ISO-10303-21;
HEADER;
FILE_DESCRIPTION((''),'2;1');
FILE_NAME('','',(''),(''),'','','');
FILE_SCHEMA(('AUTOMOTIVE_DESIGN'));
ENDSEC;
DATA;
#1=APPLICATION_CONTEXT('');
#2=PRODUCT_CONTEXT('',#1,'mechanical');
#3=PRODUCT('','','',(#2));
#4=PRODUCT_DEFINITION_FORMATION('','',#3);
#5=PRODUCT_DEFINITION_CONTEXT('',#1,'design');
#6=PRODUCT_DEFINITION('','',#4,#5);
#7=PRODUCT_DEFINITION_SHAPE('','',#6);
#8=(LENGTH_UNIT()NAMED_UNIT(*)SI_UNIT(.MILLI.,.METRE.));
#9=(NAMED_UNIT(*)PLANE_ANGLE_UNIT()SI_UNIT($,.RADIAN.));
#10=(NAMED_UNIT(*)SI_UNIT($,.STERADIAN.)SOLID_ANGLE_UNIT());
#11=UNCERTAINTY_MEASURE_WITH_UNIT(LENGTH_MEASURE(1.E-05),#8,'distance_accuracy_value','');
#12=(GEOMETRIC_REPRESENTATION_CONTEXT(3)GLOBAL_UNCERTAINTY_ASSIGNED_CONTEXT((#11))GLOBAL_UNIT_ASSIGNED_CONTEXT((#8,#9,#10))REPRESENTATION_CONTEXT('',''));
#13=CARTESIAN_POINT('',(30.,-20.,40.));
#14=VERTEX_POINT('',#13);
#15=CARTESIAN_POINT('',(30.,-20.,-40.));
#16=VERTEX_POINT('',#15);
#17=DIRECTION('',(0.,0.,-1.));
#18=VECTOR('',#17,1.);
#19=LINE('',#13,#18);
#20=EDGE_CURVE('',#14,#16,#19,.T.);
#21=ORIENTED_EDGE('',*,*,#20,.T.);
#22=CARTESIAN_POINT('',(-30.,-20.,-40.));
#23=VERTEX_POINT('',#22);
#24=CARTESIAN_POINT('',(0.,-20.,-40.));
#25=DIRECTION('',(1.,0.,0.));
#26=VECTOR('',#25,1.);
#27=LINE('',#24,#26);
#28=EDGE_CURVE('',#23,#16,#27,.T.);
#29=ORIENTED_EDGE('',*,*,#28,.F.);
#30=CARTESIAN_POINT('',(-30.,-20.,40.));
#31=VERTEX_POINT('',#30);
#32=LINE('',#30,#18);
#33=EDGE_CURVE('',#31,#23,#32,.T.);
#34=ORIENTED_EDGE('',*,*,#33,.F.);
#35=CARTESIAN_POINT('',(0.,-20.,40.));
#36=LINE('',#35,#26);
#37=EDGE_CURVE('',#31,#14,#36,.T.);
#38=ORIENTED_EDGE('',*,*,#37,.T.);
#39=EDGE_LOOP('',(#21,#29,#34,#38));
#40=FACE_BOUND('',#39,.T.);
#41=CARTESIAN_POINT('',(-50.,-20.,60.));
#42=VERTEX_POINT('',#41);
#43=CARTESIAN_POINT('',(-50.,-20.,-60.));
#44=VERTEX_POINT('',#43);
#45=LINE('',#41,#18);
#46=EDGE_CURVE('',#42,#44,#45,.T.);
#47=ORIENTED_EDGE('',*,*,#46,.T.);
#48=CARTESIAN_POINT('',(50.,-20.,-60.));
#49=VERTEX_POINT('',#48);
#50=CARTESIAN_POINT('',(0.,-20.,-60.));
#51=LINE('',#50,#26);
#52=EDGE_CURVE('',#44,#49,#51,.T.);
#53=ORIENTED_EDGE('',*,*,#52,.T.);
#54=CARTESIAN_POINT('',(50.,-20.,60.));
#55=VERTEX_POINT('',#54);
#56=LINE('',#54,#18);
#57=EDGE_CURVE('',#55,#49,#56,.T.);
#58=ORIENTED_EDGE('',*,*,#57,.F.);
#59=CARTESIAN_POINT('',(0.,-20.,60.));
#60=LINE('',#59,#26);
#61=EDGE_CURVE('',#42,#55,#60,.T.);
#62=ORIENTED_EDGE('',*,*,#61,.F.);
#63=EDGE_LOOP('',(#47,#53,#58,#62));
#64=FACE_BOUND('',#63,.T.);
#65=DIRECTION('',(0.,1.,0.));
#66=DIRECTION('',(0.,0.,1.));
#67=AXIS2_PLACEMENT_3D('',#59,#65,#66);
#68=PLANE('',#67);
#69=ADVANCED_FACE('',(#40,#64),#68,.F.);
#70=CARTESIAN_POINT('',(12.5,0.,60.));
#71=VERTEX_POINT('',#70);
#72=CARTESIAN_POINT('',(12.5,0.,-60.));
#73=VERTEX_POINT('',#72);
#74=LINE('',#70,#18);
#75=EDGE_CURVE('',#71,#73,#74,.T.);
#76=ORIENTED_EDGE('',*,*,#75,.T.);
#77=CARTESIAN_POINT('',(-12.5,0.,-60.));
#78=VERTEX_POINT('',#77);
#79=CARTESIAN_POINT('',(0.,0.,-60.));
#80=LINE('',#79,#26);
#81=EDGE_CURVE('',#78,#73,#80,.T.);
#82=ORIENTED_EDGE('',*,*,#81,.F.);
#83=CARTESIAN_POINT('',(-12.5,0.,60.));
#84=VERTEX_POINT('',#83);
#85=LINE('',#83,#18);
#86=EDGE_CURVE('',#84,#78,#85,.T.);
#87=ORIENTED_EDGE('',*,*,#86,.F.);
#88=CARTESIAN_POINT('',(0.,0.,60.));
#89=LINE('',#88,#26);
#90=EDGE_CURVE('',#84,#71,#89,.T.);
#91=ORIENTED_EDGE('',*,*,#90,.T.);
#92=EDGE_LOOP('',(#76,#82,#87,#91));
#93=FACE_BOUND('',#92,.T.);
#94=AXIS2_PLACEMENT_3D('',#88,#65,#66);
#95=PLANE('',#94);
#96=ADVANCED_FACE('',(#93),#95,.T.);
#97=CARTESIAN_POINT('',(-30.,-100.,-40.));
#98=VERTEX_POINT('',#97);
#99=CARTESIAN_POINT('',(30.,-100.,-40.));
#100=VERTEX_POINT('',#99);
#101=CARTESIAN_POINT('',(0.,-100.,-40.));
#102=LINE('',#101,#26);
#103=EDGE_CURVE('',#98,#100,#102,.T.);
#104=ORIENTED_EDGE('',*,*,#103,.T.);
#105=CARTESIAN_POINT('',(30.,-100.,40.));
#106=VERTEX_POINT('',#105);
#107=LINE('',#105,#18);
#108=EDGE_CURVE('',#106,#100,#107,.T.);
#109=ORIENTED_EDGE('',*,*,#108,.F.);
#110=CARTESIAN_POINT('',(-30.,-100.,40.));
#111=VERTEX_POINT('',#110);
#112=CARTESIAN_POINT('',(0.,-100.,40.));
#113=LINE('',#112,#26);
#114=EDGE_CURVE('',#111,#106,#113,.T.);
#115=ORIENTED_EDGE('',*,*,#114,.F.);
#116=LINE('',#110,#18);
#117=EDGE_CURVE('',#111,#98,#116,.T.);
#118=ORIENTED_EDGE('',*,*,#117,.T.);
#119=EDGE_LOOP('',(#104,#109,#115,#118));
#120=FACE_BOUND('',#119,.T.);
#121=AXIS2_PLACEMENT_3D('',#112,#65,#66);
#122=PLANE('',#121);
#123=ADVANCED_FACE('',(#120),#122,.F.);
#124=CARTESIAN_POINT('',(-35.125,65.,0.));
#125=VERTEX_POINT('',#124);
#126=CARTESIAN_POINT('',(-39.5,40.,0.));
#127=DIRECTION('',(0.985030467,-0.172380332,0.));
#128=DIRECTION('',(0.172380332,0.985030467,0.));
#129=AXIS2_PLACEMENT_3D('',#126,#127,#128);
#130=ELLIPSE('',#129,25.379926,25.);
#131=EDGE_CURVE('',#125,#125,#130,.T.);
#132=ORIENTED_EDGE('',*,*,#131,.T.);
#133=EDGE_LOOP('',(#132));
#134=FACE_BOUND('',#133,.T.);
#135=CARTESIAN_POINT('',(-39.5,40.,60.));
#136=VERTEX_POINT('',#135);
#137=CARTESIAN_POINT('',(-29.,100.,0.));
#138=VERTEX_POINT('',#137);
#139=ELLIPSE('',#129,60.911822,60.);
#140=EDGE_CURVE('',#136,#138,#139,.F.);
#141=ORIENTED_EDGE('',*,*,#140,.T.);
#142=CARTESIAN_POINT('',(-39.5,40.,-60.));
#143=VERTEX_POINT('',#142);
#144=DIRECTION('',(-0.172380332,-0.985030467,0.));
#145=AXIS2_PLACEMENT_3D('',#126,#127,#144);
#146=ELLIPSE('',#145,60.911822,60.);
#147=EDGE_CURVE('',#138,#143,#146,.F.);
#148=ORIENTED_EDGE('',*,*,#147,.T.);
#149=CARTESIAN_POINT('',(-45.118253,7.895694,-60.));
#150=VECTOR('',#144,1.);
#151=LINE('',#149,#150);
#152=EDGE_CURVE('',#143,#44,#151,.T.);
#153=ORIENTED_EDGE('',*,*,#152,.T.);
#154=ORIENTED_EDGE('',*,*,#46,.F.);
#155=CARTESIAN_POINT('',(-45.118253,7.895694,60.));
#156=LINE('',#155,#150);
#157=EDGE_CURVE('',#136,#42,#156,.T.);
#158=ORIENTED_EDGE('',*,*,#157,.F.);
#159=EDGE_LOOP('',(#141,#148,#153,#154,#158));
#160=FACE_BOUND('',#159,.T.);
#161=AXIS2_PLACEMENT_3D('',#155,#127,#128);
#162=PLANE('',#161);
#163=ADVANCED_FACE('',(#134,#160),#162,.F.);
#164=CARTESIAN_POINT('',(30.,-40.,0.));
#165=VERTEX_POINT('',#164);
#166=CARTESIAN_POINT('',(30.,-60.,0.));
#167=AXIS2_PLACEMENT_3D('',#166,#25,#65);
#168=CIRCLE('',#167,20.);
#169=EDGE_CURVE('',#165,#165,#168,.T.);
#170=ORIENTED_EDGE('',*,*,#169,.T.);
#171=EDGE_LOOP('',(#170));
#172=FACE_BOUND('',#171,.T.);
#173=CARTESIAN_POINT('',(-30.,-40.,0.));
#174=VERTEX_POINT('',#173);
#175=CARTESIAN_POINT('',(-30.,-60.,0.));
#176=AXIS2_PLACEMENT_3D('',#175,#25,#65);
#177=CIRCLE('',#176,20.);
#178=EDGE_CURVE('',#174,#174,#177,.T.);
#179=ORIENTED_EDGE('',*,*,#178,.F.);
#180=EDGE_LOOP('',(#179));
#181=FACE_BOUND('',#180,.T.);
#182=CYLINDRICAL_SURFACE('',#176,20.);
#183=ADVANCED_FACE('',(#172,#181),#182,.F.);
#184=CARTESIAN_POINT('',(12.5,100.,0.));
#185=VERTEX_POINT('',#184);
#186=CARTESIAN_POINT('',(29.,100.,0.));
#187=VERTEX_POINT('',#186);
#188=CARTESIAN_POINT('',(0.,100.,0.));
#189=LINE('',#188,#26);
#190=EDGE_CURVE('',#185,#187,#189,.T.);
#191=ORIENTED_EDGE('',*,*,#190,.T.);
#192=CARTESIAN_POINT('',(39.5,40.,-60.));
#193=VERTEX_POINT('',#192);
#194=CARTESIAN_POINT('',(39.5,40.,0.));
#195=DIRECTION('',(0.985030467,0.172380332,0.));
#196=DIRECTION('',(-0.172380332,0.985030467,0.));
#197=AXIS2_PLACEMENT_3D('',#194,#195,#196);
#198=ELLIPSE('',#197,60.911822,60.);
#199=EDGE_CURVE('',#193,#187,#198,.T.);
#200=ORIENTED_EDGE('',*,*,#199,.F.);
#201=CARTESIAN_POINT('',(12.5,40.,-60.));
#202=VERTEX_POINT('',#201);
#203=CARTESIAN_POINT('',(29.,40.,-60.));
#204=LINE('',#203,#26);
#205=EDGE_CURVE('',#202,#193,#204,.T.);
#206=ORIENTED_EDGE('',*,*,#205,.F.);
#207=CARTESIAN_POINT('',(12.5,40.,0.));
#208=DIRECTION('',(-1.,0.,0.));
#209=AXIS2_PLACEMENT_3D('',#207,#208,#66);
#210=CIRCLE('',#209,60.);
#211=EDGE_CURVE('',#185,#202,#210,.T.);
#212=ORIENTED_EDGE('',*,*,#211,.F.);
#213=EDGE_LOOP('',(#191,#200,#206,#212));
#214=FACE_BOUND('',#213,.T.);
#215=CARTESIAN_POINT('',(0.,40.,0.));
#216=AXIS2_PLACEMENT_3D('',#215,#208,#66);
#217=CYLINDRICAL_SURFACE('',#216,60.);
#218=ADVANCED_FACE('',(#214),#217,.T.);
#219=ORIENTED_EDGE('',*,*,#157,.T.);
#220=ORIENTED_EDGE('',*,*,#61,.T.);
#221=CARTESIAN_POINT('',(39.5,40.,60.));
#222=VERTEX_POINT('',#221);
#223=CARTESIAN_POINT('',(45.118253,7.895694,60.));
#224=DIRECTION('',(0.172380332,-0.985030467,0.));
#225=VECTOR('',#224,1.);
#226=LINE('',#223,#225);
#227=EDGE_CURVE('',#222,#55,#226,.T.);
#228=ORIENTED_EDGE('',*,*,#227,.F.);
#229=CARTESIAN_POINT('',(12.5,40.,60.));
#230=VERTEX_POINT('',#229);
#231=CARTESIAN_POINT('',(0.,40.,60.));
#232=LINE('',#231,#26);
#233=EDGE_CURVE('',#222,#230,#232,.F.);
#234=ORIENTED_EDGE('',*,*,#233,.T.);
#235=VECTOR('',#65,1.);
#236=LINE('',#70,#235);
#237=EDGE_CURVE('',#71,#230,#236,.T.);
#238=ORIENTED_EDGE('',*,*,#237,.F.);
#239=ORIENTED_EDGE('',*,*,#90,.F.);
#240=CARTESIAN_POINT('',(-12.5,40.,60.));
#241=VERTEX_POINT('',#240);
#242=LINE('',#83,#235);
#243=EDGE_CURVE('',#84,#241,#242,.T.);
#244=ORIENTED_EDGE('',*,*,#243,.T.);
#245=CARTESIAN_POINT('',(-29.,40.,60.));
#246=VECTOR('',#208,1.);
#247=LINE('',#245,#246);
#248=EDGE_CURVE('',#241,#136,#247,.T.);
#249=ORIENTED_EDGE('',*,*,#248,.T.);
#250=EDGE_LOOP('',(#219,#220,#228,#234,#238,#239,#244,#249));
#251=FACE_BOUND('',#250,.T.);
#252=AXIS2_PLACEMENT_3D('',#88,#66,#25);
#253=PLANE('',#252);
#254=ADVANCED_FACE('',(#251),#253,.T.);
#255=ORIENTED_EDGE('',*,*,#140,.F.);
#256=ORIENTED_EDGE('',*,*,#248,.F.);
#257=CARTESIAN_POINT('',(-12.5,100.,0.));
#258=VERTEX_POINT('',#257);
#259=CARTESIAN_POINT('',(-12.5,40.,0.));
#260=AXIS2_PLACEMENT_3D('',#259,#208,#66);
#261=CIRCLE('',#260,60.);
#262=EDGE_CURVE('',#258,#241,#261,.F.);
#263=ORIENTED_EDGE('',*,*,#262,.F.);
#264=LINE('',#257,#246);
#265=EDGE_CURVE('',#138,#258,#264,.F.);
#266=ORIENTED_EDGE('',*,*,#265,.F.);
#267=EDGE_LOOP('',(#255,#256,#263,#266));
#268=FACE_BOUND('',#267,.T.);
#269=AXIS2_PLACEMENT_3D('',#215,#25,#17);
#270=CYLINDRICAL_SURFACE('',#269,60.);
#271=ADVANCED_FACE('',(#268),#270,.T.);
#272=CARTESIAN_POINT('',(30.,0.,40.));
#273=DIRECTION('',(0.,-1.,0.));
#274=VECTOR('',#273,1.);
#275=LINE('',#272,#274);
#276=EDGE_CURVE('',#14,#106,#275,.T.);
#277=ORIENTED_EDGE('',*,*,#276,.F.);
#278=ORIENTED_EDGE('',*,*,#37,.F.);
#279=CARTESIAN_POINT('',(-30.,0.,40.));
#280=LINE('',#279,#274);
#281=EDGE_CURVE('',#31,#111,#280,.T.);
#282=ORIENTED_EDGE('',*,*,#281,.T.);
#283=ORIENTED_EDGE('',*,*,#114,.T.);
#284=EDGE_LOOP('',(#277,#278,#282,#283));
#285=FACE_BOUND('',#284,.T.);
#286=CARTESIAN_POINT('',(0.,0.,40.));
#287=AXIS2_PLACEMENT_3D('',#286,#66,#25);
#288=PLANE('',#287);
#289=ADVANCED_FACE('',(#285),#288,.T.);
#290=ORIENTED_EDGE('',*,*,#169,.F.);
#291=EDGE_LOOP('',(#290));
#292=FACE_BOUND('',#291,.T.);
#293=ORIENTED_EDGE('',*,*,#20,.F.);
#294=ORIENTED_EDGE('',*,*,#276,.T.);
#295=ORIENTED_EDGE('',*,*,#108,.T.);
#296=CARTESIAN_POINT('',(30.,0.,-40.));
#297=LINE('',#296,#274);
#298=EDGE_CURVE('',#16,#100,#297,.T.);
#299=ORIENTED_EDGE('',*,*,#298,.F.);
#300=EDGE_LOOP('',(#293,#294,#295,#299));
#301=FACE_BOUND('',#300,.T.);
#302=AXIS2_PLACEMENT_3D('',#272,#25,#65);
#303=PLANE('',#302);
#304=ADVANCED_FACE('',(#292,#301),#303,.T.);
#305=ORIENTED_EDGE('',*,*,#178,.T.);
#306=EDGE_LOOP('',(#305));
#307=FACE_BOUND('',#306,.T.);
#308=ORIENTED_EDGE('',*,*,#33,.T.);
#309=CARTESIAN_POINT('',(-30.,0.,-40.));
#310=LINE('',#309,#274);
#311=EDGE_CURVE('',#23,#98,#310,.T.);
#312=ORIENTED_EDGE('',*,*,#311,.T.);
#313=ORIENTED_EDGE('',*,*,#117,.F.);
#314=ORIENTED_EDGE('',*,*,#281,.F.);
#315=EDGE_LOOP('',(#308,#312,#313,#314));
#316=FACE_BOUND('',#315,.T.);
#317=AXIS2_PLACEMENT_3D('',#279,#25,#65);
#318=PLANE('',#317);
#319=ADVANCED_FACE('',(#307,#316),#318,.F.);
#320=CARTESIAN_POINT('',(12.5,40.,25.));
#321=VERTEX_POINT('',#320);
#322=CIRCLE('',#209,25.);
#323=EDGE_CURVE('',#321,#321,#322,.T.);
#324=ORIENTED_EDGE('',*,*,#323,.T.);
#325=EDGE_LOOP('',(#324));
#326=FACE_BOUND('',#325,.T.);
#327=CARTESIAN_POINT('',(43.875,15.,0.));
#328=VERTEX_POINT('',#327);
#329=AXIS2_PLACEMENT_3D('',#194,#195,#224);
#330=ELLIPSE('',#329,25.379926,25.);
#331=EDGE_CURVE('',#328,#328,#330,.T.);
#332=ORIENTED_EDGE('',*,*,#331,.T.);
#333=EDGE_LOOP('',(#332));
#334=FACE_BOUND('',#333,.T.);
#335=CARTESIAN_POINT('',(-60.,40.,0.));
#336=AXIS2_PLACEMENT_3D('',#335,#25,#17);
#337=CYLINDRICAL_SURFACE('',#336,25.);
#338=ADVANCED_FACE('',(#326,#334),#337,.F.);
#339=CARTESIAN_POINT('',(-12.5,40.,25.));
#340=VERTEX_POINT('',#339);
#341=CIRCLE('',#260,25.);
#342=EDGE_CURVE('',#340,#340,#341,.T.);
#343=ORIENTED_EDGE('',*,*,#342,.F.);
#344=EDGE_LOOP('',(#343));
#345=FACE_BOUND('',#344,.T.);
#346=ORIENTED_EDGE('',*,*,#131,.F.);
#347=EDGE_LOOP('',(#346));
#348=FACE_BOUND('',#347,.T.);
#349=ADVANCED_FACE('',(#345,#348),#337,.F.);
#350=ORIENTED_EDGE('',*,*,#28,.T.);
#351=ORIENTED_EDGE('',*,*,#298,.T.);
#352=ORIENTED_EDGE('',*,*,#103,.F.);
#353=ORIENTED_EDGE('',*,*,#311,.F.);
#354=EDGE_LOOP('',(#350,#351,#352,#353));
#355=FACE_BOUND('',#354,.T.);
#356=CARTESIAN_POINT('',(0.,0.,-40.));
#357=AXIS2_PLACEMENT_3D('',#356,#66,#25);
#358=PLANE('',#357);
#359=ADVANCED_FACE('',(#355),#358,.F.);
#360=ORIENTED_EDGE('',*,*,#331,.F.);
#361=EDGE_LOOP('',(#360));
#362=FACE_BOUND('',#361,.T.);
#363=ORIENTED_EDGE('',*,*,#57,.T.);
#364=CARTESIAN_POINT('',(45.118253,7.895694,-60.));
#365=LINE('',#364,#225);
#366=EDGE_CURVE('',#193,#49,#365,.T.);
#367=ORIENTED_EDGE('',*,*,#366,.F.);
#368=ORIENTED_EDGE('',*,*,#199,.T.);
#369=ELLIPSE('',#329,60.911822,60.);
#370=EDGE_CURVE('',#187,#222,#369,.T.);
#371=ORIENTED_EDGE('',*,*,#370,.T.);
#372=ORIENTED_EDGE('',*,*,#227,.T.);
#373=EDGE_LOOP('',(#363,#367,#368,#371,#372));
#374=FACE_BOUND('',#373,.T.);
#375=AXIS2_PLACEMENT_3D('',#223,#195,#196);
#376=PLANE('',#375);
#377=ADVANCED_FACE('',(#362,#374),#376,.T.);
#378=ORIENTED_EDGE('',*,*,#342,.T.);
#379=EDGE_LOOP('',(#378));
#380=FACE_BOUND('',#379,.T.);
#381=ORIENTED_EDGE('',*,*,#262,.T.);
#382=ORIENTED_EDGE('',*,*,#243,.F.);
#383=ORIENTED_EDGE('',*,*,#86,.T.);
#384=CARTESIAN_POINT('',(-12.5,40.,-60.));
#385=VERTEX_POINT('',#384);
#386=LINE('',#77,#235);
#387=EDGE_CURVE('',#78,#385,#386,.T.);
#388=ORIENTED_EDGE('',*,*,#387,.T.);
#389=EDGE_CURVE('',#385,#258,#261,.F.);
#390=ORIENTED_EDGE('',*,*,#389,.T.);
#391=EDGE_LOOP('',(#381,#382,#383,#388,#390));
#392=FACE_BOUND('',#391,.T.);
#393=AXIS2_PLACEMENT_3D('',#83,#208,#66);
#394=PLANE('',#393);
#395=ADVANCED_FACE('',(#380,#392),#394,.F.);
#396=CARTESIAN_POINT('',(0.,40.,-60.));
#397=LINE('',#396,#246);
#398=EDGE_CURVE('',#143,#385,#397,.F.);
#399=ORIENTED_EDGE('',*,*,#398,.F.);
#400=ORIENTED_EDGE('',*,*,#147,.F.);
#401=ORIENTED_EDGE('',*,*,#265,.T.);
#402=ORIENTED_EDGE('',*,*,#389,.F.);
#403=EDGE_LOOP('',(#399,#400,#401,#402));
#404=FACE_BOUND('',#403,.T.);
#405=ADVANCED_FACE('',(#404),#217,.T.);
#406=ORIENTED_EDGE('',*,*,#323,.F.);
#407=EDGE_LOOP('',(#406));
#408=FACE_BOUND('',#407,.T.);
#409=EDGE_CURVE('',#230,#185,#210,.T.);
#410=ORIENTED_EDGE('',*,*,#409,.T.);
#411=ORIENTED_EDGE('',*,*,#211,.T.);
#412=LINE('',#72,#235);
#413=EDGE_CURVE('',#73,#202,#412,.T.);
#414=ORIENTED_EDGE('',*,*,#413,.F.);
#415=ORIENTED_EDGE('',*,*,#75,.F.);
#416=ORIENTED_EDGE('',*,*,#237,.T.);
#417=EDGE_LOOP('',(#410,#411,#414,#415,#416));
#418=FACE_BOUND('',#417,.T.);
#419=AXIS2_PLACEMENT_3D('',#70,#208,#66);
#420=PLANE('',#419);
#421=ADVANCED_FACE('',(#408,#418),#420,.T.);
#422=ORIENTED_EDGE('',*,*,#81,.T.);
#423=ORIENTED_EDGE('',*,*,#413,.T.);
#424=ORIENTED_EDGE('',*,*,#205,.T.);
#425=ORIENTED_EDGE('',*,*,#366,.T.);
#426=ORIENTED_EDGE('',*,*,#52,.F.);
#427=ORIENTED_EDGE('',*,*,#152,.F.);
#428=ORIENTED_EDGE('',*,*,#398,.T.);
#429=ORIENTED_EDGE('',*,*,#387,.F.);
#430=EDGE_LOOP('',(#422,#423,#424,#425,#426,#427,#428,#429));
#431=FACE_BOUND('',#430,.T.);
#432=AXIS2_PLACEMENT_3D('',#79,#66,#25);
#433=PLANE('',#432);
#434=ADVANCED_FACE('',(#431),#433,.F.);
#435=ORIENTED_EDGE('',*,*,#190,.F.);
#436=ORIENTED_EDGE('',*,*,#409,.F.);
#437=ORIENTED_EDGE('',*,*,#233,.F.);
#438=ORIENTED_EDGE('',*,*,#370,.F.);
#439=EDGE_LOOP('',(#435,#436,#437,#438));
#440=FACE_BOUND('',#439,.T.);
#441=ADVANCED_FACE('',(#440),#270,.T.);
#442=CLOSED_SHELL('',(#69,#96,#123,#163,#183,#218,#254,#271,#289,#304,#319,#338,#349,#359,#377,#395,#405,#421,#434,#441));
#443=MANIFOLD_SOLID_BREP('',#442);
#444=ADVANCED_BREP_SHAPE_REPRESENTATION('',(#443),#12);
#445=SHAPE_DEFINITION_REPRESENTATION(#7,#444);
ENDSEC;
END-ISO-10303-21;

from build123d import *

# Parameters (mm, degrees)
SKETCH1_W           = 80
SKETCH1_H           = 60
BOSS_EXTRUDE1_DEPTH = 40
BOSS_EXTRUDE2_DEPTH = 60
SKETCH2_R           = 25
CUT_EXTRUDE2_DEPTH  = 60
FILLET1_R           = 60
SKETCH3_R           = 20
CUT_EXTRUDE3_DEPTH  = 60


with BuildPart() as part:
    # Sketch1 → Boss-Extrude1 (new, symmetric)
    with BuildSketch(Plane(origin=(0, 0, 0), x_dir=(0, 1, 0), z_dir=(0, 0, 1))):
        with Locations((-60, 0)):
            Rectangle(SKETCH1_W, SKETCH1_H)
    extrude(amount=BOSS_EXTRUDE1_DEPTH, both=True)

    # Sketch1<3> → Boss-Extrude2 (add, symmetric)
    with BuildSketch(Plane(origin=(0, 0, 0), x_dir=(0, 1, 0), z_dir=(0, 0, 1))):
        Polygon((100, -29), (-20, -50), (-20, 50), (100, 29), (100, 12.5), (0, 12.5), (0, -12.5), (100, -12.5), align=None)
    extrude(amount=BOSS_EXTRUDE2_DEPTH, both=True)

    # Sketch2 → Cut-Extrude2 (cut, symmetric)
    with BuildSketch(Plane.YZ):
        with Locations((40, 0)):
            Circle(SKETCH2_R)
    extrude(amount=CUT_EXTRUDE2_DEPTH, both=True, mode=Mode.SUBTRACT)

    # Fillet1
    fillet1_edges = [part.edges().sort_by_distance(p)[0] for p in [
        (-20.75, 100, -60),
        (20.75, 100, -60),
        (-20.75, 100, 60),
        (20.75, 100, 60),
    ]]
    fillet(fillet1_edges, radius=FILLET1_R - 0.0001)  # a hair under: the kernel refuses the full size

    # Sketch3 → Cut-Extrude3 (cut, symmetric)
    with BuildSketch(Plane.YZ.offset(30)):
        with Locations((-60, 0)):
            Circle(SKETCH3_R)
    extrude(amount=CUT_EXTRUDE3_DEPTH, both=True, mode=Mode.SUBTRACT)


solid = part.part
